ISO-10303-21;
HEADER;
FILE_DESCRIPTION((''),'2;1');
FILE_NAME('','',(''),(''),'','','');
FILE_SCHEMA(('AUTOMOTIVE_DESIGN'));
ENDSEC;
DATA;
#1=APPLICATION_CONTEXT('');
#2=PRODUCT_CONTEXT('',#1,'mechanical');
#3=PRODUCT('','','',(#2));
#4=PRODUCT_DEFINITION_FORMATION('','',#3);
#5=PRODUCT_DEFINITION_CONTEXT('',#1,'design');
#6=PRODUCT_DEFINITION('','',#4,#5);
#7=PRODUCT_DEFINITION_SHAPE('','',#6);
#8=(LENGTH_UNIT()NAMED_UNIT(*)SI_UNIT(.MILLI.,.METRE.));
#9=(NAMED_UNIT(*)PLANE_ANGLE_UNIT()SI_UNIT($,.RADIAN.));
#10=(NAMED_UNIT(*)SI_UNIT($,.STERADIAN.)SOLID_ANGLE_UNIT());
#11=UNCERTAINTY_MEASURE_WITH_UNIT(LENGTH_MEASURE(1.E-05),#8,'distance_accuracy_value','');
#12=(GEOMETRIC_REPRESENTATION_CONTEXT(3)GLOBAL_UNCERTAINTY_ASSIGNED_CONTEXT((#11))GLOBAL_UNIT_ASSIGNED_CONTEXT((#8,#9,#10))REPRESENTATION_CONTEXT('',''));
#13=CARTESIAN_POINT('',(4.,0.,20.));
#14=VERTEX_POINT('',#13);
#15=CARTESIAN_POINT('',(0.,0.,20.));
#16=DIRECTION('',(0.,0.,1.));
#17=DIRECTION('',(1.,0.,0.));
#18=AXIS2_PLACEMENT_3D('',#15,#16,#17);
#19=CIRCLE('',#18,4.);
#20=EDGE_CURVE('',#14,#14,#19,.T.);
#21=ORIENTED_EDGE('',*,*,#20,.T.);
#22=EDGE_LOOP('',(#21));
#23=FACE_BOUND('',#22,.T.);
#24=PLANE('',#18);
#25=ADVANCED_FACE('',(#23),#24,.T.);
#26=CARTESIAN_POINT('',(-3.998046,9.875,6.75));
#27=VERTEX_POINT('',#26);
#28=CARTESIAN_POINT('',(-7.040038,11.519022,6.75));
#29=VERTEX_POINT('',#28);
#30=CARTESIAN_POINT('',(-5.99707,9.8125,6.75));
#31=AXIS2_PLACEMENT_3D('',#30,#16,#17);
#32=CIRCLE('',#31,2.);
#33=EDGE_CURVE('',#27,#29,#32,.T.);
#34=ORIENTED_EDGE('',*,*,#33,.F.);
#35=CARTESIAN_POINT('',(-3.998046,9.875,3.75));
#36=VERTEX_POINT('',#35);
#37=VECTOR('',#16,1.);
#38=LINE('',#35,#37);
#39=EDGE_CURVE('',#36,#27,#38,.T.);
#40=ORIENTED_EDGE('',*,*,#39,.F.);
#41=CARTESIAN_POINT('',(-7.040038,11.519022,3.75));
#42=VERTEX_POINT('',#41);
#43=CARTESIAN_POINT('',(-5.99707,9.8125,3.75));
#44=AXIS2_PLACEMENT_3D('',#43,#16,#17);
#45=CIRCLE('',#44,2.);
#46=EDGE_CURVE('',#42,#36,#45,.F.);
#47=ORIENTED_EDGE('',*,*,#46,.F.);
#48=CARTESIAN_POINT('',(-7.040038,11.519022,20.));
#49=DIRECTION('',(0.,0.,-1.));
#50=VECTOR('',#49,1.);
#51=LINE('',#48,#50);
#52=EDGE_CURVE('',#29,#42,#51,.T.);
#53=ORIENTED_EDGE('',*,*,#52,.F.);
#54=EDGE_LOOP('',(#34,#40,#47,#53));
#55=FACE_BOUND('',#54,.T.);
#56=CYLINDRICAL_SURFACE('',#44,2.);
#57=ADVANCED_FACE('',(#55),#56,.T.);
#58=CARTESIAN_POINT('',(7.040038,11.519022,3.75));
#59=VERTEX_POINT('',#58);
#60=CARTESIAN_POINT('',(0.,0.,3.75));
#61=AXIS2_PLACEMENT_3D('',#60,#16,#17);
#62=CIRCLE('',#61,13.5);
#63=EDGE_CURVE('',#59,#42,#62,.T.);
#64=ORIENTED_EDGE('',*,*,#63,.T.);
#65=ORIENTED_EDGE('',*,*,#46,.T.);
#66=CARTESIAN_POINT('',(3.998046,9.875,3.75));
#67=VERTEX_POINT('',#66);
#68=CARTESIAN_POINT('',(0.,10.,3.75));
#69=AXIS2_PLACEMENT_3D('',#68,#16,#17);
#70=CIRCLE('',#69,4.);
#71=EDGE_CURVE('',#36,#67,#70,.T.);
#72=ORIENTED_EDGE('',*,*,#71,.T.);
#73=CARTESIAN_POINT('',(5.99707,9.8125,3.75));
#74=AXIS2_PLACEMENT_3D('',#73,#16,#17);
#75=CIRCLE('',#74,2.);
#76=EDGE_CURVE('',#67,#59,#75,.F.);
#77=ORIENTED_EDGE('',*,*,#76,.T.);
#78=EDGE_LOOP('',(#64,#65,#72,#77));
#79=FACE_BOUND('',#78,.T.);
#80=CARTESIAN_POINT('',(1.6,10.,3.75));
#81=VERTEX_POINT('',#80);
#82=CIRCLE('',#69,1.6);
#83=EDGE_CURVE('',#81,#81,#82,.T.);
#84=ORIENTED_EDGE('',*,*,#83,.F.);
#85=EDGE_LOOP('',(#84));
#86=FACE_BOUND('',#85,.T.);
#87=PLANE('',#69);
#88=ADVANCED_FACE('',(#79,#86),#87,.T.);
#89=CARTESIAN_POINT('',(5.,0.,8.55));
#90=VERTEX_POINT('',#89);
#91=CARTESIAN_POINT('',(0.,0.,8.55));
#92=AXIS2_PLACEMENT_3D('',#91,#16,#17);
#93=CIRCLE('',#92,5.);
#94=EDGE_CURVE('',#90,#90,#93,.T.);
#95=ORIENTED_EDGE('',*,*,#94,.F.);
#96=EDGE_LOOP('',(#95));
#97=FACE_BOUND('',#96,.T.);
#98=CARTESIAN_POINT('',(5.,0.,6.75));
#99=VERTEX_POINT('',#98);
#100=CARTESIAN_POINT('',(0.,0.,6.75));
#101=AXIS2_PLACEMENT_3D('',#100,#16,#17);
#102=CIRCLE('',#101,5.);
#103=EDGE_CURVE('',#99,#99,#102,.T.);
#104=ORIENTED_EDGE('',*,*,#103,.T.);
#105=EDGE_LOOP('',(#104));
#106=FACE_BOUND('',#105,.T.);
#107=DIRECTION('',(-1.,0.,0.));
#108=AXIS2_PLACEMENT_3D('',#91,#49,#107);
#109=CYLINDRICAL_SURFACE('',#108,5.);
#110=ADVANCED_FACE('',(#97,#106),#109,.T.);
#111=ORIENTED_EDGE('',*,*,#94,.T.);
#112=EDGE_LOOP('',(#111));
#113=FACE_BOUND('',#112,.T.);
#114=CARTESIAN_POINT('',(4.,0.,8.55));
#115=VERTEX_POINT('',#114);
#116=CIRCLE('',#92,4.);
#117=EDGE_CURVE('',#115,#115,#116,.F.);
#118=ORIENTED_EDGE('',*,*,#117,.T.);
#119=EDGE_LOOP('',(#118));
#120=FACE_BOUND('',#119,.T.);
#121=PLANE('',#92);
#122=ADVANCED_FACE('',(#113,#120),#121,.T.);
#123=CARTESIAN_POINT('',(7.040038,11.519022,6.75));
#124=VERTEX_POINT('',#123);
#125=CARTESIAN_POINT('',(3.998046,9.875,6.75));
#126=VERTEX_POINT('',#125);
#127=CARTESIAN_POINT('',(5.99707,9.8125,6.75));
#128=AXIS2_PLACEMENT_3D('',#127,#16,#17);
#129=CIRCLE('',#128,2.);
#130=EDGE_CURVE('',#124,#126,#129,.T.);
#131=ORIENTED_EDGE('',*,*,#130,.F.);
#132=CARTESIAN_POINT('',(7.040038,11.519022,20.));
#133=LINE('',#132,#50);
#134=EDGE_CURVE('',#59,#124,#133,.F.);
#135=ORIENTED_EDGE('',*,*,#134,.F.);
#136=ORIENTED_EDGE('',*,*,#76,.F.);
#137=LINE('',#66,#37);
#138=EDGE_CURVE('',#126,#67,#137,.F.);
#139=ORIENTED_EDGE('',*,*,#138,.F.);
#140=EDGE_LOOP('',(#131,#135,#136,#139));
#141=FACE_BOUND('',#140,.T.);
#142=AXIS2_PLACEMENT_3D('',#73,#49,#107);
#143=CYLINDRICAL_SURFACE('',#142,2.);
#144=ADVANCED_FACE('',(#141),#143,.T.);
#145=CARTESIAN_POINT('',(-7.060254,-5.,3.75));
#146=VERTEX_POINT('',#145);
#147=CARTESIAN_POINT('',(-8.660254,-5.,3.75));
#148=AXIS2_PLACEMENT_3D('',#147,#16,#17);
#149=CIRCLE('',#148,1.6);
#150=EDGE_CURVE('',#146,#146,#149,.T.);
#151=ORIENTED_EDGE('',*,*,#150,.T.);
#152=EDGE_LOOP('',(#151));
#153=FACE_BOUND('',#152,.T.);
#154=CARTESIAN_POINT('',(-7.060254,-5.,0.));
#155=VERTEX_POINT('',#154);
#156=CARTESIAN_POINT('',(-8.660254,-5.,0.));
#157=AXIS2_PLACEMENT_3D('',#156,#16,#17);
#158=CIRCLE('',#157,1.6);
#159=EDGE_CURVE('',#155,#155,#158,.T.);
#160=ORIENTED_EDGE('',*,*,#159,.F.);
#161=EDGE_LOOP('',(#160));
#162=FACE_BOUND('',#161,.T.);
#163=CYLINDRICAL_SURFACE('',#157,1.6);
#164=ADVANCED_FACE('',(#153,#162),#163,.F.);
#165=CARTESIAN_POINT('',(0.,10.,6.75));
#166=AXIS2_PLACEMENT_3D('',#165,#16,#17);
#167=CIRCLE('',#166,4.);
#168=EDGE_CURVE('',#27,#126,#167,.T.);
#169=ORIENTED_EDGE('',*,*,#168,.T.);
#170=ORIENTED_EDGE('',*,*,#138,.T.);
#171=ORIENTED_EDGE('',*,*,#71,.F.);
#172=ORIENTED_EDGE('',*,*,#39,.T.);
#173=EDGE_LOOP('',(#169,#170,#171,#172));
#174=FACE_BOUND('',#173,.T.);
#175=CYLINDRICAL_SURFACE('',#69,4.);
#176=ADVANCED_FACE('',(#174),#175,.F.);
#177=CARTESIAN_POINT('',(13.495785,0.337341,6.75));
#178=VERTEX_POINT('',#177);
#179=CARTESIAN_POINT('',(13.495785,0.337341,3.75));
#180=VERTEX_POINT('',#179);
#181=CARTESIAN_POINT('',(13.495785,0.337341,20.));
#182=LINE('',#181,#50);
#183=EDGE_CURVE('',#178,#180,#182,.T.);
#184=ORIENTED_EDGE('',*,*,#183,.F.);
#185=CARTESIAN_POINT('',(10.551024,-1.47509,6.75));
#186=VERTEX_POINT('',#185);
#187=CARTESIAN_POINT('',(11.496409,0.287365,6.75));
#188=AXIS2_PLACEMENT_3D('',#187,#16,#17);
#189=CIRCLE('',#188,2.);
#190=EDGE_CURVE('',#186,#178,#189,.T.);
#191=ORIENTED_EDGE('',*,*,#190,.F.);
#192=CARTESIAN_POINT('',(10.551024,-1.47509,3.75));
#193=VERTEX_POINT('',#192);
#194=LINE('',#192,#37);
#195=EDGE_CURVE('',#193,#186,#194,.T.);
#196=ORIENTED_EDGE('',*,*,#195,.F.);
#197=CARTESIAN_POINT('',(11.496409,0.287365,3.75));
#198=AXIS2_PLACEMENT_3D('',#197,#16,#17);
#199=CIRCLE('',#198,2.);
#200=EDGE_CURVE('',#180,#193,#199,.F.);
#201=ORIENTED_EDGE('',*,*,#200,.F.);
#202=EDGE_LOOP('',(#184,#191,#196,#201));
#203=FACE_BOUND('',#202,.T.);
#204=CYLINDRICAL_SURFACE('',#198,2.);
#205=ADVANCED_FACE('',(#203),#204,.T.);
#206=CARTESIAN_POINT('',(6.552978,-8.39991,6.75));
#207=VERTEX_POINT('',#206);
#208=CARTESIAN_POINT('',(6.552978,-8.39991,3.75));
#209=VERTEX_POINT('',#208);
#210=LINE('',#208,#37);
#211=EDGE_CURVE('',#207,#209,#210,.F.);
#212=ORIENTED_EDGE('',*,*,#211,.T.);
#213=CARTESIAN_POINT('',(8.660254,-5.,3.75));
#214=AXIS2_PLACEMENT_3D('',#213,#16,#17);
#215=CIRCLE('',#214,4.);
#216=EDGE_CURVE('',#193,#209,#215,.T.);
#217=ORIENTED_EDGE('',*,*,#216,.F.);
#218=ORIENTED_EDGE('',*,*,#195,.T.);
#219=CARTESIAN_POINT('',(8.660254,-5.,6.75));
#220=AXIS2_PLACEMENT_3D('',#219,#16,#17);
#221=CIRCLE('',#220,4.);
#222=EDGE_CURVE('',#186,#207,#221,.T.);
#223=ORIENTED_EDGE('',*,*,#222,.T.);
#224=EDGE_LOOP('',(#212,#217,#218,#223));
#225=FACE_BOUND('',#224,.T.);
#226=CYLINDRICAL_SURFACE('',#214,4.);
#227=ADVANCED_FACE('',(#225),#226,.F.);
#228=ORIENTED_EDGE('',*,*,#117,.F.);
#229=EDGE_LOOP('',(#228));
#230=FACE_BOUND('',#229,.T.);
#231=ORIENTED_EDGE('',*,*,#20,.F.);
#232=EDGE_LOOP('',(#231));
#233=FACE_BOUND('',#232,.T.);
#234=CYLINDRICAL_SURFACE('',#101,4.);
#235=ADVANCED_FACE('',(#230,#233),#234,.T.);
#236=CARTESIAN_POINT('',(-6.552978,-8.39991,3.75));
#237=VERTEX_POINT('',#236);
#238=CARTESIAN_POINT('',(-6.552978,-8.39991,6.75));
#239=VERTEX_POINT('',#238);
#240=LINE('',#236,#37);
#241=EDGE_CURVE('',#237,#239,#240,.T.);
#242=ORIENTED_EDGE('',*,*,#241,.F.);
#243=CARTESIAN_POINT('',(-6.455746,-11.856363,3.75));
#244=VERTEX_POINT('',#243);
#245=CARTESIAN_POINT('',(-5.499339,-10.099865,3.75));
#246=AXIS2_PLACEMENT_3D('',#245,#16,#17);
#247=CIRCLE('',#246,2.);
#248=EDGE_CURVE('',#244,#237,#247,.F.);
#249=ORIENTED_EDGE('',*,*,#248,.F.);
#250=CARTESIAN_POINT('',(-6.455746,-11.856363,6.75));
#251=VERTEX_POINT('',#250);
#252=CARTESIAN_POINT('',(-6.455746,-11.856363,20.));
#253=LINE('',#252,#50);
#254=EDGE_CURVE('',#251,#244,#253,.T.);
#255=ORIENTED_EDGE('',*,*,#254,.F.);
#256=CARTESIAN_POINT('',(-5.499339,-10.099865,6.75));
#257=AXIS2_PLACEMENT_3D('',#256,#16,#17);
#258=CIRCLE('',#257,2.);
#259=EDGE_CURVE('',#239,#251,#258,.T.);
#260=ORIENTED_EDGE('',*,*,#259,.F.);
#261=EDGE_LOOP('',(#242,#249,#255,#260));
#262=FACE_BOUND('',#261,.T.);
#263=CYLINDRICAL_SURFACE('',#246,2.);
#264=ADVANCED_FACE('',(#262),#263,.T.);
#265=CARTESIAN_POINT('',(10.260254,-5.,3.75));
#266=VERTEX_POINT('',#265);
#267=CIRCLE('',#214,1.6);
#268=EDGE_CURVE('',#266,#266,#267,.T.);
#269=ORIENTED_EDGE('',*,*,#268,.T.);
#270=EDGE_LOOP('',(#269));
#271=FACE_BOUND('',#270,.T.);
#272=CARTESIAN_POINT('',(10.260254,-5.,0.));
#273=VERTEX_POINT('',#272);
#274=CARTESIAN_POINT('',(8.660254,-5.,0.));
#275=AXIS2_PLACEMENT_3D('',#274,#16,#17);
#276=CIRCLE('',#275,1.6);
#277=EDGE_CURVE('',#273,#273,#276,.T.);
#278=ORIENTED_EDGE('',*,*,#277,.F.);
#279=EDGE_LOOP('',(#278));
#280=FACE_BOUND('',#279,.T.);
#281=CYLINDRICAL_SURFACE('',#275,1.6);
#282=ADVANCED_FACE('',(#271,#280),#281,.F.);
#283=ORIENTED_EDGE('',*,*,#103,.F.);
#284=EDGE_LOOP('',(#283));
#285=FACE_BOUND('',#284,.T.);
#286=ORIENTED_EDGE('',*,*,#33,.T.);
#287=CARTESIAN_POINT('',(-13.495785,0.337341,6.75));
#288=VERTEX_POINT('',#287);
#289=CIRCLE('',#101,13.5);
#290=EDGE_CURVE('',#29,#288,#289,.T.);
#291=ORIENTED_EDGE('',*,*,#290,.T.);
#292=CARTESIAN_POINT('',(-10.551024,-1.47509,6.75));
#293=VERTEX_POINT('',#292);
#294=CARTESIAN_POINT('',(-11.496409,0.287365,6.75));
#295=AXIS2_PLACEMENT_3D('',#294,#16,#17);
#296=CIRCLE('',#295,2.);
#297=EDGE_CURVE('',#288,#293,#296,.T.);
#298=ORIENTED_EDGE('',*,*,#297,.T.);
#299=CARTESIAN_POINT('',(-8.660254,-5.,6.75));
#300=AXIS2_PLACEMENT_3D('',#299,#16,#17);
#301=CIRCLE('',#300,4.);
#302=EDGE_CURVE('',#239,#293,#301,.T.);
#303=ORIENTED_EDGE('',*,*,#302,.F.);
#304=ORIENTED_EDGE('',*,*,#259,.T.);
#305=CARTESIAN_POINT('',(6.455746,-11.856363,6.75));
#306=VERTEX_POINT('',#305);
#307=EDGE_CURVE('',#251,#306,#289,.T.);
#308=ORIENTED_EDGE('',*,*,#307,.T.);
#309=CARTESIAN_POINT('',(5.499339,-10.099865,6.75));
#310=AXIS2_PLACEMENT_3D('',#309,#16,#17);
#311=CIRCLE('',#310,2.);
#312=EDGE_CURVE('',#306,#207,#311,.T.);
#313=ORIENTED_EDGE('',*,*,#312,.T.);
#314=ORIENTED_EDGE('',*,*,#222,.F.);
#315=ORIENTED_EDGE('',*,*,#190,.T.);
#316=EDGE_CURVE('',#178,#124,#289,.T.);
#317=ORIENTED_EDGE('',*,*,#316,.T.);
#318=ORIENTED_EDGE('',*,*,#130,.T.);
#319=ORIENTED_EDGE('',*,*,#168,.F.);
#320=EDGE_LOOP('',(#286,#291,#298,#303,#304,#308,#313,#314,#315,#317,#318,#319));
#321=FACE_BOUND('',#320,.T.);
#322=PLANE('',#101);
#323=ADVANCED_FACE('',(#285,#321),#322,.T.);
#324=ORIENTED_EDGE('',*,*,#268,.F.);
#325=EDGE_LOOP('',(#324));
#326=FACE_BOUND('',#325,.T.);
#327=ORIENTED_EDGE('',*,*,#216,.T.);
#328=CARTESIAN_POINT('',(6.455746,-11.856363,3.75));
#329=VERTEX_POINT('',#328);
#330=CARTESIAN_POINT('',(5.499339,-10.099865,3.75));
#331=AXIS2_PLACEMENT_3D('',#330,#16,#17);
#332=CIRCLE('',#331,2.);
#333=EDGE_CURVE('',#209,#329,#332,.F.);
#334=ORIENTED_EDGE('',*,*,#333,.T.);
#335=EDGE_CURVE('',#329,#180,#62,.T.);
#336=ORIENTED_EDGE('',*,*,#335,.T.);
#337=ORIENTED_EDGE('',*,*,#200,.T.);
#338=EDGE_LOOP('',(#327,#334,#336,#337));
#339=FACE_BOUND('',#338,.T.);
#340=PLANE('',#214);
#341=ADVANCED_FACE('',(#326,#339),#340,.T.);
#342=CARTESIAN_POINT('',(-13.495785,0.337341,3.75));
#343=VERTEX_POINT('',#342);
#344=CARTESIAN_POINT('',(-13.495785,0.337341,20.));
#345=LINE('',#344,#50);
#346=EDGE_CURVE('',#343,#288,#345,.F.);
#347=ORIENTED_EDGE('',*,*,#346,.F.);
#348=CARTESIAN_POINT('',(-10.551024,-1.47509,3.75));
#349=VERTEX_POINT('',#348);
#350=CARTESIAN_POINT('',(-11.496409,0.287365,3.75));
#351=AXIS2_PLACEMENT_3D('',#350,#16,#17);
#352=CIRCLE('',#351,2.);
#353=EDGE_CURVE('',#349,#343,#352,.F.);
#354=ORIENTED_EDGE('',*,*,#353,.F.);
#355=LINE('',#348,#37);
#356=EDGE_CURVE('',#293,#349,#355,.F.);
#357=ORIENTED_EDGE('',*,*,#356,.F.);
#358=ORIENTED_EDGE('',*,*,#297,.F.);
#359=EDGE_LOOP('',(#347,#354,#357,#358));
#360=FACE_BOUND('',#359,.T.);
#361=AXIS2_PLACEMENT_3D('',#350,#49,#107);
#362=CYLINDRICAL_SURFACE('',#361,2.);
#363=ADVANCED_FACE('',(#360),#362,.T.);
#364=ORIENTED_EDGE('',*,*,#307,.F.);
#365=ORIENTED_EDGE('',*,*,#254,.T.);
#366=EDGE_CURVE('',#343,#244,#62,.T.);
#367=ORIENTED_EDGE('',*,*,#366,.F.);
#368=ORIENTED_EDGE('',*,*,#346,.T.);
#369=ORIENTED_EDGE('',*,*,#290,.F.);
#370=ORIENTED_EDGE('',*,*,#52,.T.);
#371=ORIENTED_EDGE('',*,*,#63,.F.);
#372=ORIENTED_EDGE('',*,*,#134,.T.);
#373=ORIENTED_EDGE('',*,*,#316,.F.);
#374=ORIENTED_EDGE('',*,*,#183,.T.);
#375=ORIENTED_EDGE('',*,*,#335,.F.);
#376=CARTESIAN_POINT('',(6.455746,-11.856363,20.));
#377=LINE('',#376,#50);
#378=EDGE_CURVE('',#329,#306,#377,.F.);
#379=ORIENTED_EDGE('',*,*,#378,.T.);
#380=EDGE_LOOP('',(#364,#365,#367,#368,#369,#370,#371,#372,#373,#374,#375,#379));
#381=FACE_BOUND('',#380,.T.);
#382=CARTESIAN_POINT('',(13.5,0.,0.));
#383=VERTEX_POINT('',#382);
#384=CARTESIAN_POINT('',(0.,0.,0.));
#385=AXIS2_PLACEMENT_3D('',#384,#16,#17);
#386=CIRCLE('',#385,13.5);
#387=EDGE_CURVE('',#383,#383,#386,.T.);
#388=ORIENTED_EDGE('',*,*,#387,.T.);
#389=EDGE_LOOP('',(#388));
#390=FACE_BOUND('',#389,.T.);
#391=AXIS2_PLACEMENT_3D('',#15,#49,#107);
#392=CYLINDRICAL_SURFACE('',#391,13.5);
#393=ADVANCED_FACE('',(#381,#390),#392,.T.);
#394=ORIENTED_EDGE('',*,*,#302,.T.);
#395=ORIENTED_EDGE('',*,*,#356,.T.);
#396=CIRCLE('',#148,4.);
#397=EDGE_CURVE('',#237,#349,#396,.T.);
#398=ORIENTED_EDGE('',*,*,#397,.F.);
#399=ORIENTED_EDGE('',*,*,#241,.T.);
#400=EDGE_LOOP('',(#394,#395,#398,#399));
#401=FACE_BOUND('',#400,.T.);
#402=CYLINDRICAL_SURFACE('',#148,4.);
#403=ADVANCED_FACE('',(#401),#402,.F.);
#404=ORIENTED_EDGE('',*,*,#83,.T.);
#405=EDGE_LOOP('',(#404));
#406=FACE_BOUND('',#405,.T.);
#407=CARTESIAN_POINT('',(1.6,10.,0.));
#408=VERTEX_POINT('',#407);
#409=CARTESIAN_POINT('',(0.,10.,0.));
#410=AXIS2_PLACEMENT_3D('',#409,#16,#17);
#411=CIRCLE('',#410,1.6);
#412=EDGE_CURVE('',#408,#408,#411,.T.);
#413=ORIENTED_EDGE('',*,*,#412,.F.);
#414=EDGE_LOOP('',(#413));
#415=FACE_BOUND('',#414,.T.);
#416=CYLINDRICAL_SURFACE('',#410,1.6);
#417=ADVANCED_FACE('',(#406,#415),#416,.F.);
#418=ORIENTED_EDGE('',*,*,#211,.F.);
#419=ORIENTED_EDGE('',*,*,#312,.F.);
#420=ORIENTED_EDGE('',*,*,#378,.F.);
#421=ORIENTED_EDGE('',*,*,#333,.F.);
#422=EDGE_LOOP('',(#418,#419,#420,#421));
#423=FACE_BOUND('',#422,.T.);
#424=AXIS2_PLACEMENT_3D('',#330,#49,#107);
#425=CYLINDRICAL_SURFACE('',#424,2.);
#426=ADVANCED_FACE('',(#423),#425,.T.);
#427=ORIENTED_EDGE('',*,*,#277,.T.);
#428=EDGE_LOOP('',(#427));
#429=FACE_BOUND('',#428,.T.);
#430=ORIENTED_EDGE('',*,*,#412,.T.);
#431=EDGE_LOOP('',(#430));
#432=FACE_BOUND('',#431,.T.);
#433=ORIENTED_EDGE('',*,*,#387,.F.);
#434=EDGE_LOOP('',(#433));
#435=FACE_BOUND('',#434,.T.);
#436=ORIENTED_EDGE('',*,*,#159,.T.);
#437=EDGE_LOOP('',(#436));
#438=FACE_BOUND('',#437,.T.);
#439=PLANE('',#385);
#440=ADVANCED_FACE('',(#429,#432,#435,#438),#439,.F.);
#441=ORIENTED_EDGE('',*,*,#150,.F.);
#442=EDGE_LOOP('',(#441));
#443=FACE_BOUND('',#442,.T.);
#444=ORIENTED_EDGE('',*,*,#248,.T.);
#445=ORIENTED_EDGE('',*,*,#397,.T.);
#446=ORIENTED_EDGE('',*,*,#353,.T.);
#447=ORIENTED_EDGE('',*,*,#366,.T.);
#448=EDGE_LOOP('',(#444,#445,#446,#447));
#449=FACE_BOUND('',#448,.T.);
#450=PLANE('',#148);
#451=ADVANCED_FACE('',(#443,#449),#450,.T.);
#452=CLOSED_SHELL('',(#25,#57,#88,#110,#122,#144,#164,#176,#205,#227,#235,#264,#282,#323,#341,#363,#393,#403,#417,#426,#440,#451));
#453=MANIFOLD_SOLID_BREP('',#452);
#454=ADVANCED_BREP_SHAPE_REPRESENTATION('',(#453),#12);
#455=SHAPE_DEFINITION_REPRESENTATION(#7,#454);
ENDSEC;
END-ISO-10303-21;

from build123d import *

# Parameters (mm, degrees)
SKETCH_1_R          = 13.5
EXTRUDE_1_DEPTH     = 20
SKETCH_2_R          = 1.6
CUT_EXTRUDE_1_DEPTH = 28.649593125
CUT_EXTRUDE_START   = -13.25
SKETCH_3_R          = 13.5
SKETCH_3_R_2        = 4
CUT_EXTRUDE_4_DEPTH = 13.25
SKETCH_4_R          = 5
SKETCH_4_R_2        = 4
EXTRUDE_2_DEPTH     = 1.8
SKETCH_5_R          = 4
SKETCH_5_R_2        = 1.6
CUT_EXTRUDE_6_DEPTH = 3
FILLET_1_R          = 2


with BuildPart() as part:
    # ｽｹｯﾁ1 → ﾎﾞｽ - 押し出し1 (new body)
    with BuildSketch(Plane.XY):
        Circle(SKETCH_1_R)
    extrude(amount=EXTRUDE_1_DEPTH)

    # ｽｹｯﾁ2 → ｶｯﾄ - 押し出し1 (cut, through all)
    with BuildSketch(Plane.XY.offset(20)):
        with Locations((0, 10)):
            Circle(SKETCH_2_R)
        with Locations((8.660254038, -5)):
            Circle(SKETCH_2_R)
        with Locations((-8.660254038, -5)):
            Circle(SKETCH_2_R)
    extrude(amount=-CUT_EXTRUDE_1_DEPTH, mode=Mode.SUBTRACT)

    # ｽｹｯﾁ3 → ｶｯﾄ - 押し出し4 (cut)
    with BuildSketch(Plane.XY.offset(20).offset(CUT_EXTRUDE_START)):
        Circle(SKETCH_3_R)
        Circle(SKETCH_3_R_2, mode=Mode.SUBTRACT)
    extrude(amount=CUT_EXTRUDE_4_DEPTH, mode=Mode.SUBTRACT)

    # ｽｹｯﾁ4 → ﾎﾞｽ - 押し出し2 (add)
    with BuildSketch(Plane.XY.offset(6.75)):
        Circle(SKETCH_4_R)
        Circle(SKETCH_4_R_2, mode=Mode.SUBTRACT)
    extrude(amount=EXTRUDE_2_DEPTH)

    # ｽｹｯﾁ5 → ｶｯﾄ - 押し出し6 (cut)
    # profile 1 of 3: a face of its own
    with BuildSketch(Plane.XY.offset(6.75)):
        with Locations((0, 10)):
            Circle(SKETCH_5_R)
        with Locations((0, 10)):
            Circle(SKETCH_5_R_2, mode=Mode.SUBTRACT)
    # profile 2 of 3: a face of its own
    with BuildSketch(Plane.XY.offset(6.75)):
        with Locations((8.660254038, -5)):
            Circle(SKETCH_5_R)
        with Locations((8.660254038, -5)):
            Circle(SKETCH_5_R_2, mode=Mode.SUBTRACT)
    # profile 3 of 3: a face of its own
    with BuildSketch(Plane.XY.offset(6.75)):
        with Locations((-8.660254038, -5)):
            Circle(SKETCH_5_R)
        with Locations((-8.660254038, -5)):
            Circle(SKETCH_5_R_2, mode=Mode.SUBTRACT)
    extrude(amount=-CUT_EXTRUDE_6_DEPTH, mode=Mode.SUBTRACT)

    # ﾌｨﾚｯﾄ1
    # the kernel refuses this fillet: 2 mm, written as the material it takes off along each edge
    with BuildSketch(Plane(origin=(-10.407876243, -8.598029548, 19.555288564), x_dir=(0.7715815777995733, -0.6361303866349423, 0), z_dir=(0, 0, -1)), Plane(origin=(12.650050133, -4.714470452, 19.555288564), x_dir=(0.1651142860452898, 0.9862744407839807, 0), z_dir=(0, 0, -1)), Plane(origin=(-2.242173889, 13.3125, 19.555288564), x_dir=(-0.9366958638448638, -0.35014405414903826, 0), z_dir=(0, 0, -1))) as fillet_1_piece_1:
        with BuildLine():
            CenterArc((4.742699468, -1.963681118), FILLET_1_R, 79.064257334, 119.641084367)
            ThreePointArc((2.848338702, -2.605083713), (1.759195342, -0.936232133), (0, 0))
            ThreePointArc((0, 0), (2.561057713, 0.245152457), (5.122115425, 0))
        make_face()
    extrude(amount=15.805288564, mode=Mode.SUBTRACT)
    with BuildSketch(Plane(origin=(-12.650050133, -4.714470452, 19.555288564), x_dir=(-0.16511428604529083, 0.9862744407839806, 0), z_dir=(0, 0, -1)), Plane(origin=(10.407876243, -8.598029548, 19.555288564), x_dir=(-0.7715815777995731, -0.6361303866349423, 0), z_dir=(0, 0, -1)), Plane(origin=(2.242173889, 13.3125, 19.555288564), x_dir=(0.9366958638448638, -0.35014405414903793, 0), z_dir=(0, 0, -1))) as fillet_1_piece_2:
        with BuildLine():
            CenterArc((4.742699468, 1.963681118), FILLET_1_R, 161.294658299, 119.641084367)
            ThreePointArc((2.848338702, 2.605083713), (1.759195342, 0.936232133), (0, 0))
            ThreePointArc((0, 0), (2.561057713, -0.245152457), (5.122115425, 0))
        make_face()
    extrude(amount=15.805288564, mode=Mode.SUBTRACT)


solid = part.part
